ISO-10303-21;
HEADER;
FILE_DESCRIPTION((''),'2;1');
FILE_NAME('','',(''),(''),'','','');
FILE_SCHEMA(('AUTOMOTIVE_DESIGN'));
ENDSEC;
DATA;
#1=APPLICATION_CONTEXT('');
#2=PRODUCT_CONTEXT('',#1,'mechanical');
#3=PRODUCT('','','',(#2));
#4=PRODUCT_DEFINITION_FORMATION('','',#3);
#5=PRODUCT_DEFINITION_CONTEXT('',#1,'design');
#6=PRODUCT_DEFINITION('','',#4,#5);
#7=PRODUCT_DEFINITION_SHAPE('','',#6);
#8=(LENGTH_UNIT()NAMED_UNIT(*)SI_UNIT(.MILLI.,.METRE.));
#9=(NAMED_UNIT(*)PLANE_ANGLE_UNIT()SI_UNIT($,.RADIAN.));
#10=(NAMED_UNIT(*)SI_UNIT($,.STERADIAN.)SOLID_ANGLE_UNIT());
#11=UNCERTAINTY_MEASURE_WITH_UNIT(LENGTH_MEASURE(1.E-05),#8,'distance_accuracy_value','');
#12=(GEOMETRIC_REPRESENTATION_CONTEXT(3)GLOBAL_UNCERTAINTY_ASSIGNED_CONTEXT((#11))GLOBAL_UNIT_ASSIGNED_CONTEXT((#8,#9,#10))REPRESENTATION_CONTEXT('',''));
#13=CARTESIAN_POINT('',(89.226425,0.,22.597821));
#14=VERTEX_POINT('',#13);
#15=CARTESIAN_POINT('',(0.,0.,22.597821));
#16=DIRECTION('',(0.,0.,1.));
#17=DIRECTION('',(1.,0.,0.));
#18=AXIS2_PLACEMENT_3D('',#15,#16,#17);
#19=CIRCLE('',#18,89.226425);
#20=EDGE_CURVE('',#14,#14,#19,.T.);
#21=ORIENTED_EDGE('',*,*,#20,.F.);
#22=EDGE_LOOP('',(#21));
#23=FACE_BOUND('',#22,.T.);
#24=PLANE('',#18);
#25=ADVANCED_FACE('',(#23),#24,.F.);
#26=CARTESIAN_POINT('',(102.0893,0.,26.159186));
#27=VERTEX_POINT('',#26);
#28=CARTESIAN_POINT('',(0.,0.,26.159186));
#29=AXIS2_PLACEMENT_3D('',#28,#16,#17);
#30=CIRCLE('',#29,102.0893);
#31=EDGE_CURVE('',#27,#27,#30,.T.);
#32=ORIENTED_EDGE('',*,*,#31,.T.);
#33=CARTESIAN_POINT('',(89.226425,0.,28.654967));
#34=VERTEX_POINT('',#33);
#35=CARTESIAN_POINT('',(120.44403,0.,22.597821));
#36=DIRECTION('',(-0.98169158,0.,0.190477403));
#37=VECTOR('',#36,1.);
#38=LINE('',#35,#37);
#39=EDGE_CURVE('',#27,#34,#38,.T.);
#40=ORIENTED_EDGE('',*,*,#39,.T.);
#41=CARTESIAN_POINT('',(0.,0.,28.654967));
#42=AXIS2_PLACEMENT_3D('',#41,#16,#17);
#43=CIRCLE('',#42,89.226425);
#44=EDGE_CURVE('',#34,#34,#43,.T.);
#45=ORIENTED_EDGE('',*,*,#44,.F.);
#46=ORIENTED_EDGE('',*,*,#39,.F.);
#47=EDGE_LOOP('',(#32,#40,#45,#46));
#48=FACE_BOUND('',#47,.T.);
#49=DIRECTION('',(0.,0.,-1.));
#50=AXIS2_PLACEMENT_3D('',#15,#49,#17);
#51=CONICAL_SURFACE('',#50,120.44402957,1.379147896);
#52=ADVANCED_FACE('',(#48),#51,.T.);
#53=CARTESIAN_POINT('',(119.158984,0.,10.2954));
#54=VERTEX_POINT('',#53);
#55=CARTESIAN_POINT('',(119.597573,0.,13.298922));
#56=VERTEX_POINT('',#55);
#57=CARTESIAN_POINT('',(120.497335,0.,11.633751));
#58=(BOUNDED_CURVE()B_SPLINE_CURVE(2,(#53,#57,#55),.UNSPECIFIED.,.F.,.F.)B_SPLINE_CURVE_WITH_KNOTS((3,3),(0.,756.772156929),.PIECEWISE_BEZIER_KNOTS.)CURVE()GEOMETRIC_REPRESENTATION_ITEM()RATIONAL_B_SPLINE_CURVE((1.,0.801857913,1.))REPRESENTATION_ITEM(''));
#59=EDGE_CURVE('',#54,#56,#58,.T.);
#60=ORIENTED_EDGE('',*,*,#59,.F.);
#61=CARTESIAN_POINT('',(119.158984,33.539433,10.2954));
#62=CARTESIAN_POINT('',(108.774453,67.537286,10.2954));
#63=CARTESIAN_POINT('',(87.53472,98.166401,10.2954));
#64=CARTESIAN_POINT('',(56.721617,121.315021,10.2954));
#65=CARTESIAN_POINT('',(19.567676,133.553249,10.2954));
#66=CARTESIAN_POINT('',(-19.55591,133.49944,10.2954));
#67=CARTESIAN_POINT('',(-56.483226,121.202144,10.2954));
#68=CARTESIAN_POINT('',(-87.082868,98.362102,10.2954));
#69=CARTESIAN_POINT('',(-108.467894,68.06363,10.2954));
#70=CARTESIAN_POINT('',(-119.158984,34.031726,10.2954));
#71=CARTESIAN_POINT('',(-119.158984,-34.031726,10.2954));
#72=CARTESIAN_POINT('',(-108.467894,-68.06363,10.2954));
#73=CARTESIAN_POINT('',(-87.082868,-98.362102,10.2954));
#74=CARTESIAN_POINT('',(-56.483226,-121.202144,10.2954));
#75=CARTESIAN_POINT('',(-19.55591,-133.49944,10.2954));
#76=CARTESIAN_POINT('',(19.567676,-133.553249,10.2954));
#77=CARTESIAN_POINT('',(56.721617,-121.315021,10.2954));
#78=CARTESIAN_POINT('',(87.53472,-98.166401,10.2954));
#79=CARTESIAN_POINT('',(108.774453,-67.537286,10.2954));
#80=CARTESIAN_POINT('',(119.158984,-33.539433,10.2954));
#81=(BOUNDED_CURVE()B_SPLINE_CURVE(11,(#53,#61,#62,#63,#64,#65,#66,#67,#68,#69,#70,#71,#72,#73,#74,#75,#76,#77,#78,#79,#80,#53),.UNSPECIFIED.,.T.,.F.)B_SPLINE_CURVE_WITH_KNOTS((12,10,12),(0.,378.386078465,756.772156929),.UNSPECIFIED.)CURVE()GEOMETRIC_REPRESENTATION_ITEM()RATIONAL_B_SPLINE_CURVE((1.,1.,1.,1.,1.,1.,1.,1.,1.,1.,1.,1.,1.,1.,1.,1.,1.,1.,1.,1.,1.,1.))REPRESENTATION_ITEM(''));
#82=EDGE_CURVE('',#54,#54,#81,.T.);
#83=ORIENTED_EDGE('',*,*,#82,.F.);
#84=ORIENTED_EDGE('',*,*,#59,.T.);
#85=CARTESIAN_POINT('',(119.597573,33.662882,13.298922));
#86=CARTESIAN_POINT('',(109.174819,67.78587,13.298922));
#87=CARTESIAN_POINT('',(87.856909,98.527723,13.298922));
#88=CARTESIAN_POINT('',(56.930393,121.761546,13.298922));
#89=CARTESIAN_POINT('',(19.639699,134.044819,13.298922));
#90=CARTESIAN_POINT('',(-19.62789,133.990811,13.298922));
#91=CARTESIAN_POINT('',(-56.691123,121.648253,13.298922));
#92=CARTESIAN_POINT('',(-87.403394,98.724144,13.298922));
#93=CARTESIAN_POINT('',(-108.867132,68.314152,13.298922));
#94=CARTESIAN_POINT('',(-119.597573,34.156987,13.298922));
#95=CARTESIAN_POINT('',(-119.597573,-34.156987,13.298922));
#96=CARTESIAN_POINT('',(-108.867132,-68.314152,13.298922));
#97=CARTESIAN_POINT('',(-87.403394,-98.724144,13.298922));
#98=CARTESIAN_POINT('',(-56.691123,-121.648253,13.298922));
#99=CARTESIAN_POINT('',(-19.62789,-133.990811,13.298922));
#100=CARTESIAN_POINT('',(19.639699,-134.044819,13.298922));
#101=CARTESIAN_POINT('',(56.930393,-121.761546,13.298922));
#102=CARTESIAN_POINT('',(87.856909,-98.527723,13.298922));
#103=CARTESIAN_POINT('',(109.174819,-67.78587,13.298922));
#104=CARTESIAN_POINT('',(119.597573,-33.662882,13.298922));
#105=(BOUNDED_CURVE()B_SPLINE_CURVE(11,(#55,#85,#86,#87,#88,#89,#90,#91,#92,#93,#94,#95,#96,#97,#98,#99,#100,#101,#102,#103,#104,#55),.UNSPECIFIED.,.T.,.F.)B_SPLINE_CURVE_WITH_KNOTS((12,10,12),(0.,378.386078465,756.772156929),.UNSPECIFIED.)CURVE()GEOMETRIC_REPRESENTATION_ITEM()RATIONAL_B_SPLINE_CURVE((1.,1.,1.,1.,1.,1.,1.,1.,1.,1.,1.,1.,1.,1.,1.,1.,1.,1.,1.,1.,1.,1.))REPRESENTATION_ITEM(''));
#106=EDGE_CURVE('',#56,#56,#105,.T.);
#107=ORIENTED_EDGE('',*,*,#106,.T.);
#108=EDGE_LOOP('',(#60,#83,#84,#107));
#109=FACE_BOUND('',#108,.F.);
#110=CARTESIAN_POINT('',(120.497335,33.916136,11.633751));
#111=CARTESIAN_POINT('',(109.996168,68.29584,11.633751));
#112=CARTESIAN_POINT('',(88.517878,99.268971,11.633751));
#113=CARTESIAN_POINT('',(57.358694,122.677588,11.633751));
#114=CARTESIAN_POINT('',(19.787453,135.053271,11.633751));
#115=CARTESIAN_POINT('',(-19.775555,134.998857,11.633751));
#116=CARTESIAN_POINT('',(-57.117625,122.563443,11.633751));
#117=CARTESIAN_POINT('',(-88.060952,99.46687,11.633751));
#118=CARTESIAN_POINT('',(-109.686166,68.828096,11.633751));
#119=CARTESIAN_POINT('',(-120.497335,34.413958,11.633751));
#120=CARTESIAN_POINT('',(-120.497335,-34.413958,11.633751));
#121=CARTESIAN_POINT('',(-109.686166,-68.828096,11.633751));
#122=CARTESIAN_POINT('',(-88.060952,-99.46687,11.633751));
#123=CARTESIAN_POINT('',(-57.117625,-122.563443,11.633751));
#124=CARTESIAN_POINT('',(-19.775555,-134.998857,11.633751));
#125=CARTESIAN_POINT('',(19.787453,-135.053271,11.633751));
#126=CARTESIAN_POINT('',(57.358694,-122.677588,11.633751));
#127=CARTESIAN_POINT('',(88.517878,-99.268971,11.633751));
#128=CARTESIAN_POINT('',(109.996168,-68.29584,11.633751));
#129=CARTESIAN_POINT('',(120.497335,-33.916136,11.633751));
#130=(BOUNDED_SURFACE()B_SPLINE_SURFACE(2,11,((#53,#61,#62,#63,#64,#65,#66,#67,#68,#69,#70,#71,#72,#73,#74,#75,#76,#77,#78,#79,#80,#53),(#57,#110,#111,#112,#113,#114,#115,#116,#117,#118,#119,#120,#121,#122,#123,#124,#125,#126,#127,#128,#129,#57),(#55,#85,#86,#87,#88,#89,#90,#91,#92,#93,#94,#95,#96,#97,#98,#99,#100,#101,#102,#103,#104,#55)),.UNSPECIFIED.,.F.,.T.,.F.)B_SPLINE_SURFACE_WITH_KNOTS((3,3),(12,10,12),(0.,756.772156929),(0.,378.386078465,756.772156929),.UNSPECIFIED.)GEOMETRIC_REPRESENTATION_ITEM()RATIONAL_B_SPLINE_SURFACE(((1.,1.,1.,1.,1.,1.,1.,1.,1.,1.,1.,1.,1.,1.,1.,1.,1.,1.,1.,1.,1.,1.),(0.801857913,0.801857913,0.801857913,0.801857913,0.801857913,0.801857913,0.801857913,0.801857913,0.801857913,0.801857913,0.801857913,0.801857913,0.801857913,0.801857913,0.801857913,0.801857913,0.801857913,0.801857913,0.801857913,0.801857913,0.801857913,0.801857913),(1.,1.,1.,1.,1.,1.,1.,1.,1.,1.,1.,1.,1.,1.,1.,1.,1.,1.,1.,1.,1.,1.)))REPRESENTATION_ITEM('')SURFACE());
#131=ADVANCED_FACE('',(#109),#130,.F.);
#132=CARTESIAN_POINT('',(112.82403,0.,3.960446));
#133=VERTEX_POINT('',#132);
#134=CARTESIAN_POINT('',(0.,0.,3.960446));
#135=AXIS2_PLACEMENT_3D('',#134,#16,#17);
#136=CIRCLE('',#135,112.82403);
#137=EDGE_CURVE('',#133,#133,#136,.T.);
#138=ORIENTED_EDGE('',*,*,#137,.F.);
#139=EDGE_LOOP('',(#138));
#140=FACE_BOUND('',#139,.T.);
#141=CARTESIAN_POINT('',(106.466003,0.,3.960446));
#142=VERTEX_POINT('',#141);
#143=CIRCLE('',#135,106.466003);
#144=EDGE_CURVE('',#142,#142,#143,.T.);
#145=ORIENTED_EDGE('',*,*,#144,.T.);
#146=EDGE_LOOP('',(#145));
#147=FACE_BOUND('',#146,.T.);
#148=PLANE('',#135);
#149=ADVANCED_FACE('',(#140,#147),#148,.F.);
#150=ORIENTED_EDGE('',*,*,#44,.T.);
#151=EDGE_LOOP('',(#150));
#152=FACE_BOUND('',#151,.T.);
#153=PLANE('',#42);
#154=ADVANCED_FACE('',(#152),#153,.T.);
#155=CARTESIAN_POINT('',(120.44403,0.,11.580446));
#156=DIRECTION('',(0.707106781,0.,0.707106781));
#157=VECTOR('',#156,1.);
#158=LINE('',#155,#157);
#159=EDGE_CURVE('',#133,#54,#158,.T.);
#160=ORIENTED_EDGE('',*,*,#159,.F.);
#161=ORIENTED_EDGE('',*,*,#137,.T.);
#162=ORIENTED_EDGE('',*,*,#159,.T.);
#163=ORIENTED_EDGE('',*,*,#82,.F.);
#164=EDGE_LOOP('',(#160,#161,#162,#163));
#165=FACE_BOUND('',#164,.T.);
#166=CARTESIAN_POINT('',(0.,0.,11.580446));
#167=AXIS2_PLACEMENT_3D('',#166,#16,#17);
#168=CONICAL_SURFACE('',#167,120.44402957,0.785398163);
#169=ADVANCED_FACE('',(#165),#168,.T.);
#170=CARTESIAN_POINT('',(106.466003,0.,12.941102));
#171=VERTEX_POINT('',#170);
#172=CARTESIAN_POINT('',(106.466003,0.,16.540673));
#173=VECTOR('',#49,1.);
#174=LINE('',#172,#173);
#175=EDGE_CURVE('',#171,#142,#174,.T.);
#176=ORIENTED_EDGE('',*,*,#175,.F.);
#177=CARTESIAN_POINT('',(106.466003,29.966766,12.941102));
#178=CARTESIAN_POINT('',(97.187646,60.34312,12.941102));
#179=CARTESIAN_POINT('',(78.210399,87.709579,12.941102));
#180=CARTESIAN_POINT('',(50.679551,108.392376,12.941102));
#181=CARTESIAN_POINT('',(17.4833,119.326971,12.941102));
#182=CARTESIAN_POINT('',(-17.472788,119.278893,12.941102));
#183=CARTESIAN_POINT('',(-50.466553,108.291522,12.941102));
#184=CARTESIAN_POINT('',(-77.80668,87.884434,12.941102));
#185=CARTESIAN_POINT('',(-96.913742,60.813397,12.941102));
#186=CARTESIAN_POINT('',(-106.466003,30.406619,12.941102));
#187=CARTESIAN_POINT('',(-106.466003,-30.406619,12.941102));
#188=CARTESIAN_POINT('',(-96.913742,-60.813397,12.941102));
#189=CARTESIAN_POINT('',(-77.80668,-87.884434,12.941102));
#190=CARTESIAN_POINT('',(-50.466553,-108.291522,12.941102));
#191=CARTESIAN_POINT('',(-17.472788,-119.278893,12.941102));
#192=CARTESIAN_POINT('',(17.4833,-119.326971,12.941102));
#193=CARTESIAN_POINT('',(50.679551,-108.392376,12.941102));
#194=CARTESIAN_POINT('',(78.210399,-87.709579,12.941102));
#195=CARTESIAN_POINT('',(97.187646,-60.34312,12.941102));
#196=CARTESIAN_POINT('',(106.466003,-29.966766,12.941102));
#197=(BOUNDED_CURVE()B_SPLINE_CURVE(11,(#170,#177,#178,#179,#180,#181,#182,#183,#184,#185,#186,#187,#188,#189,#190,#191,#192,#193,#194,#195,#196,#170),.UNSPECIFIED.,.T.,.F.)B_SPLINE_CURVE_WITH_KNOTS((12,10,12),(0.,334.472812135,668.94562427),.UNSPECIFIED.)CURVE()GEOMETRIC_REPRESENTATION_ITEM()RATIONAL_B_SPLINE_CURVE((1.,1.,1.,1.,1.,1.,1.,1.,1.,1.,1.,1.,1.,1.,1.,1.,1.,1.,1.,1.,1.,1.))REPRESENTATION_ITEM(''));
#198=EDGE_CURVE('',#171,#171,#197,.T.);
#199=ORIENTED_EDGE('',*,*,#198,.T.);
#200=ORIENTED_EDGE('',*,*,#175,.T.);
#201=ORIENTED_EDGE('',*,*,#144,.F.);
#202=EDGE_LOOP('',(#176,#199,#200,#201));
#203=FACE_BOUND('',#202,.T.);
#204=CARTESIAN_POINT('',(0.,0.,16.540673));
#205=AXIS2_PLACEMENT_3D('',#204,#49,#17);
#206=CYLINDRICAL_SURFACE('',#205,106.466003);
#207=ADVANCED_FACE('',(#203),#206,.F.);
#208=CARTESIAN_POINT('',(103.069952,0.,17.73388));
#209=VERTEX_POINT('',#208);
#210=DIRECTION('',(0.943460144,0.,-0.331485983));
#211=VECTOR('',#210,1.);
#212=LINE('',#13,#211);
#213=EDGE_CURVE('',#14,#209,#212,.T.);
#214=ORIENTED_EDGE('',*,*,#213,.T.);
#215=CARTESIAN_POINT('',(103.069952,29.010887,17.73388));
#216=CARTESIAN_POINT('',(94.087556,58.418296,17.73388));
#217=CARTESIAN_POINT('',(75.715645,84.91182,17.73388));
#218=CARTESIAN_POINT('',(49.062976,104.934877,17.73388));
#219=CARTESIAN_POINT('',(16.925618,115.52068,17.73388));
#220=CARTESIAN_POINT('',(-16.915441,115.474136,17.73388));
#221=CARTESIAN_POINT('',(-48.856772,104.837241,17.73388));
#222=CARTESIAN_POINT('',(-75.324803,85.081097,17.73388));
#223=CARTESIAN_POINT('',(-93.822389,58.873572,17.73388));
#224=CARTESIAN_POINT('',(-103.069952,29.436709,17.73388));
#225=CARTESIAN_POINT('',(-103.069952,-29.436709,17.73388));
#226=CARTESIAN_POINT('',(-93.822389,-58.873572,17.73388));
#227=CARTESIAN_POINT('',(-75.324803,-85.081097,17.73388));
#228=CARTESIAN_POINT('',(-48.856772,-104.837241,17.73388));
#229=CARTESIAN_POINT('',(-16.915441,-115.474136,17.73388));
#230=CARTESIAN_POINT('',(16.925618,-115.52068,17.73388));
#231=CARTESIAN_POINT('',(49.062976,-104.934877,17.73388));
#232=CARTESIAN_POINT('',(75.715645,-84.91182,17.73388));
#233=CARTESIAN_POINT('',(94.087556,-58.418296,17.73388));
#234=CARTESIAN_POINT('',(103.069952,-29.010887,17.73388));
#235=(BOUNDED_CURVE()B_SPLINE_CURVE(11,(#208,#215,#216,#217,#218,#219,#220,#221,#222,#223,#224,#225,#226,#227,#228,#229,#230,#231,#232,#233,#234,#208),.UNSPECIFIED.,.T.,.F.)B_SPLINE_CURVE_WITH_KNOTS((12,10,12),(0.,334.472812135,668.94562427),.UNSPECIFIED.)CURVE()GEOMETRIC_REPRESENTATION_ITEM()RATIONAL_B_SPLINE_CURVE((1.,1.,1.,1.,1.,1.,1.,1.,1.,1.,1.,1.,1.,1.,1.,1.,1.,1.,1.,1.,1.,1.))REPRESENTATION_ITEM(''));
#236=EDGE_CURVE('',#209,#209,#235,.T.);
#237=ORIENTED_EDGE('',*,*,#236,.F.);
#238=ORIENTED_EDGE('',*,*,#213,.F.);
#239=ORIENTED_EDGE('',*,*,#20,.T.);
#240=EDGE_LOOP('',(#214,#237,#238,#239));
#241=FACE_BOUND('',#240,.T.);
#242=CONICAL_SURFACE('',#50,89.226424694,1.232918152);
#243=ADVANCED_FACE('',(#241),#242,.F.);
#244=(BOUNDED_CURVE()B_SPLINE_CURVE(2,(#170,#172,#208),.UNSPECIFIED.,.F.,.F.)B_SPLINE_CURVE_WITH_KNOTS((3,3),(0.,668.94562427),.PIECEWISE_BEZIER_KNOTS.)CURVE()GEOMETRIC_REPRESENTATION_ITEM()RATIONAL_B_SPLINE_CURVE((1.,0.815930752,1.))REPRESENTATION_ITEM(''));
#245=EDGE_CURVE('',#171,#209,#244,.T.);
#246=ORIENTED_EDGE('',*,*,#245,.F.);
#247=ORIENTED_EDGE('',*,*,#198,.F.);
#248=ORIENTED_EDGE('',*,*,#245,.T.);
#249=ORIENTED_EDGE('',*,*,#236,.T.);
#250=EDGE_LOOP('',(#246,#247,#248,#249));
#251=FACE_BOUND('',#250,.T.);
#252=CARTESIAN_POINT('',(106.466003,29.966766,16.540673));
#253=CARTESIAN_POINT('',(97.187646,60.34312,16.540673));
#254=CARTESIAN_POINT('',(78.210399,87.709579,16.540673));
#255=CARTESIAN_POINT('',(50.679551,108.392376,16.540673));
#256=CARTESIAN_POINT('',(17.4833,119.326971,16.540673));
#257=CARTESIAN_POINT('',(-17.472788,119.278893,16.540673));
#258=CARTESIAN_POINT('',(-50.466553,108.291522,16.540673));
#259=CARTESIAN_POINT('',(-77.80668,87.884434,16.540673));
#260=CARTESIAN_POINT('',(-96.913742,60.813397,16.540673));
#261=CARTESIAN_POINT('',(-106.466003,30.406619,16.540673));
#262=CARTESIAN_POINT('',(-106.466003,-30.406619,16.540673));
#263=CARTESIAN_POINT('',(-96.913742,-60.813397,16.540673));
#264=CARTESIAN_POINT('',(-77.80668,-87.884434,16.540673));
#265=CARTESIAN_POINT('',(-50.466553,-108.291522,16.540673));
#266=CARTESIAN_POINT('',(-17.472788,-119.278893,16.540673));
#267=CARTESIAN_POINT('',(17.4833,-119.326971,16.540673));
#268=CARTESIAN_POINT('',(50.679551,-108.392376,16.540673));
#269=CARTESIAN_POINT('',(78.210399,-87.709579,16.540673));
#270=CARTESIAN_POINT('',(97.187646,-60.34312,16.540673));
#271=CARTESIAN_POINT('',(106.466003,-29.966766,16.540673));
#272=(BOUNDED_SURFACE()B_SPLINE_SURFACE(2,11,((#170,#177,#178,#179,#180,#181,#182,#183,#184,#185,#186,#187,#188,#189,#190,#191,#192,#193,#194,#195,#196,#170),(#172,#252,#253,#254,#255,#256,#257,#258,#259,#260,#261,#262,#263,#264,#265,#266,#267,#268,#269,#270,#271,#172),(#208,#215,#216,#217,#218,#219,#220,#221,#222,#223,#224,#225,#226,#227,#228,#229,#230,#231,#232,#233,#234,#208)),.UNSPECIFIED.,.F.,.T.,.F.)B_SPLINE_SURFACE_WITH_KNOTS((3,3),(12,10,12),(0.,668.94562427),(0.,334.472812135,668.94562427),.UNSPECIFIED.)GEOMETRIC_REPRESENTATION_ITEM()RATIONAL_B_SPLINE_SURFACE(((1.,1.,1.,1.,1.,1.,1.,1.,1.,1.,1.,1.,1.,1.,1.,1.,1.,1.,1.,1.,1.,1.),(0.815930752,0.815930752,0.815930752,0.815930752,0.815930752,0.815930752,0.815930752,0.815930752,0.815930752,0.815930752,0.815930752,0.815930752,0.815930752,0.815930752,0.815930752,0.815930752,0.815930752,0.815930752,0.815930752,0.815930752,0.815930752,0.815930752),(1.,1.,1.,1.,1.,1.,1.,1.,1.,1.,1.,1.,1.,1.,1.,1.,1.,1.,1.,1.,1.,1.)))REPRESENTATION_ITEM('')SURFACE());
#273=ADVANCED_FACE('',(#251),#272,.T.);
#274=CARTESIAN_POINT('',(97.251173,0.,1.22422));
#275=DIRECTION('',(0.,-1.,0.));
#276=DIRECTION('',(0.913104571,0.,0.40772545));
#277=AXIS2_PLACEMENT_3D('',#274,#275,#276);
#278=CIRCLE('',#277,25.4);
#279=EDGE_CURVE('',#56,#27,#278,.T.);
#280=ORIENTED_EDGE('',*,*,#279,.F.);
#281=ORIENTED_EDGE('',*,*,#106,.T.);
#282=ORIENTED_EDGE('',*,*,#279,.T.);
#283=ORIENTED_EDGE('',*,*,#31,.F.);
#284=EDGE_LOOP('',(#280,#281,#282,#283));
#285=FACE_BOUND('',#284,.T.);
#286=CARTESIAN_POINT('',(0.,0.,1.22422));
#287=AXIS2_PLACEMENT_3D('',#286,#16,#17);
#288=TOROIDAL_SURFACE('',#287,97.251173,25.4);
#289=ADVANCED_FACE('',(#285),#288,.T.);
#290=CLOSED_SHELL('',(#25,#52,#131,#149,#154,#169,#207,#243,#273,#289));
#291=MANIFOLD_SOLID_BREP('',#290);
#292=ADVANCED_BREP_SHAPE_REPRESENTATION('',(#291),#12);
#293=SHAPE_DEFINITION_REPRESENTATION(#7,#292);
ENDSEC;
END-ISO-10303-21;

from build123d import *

# Parameters (mm, degrees)
F2_SIZE = 7.62
F4_R    = 2.54
F5_R    = 5.08


# Not quite as in the source:
# - a fillet or chamfer that OpenCascade refuses, or shapes differently, is made with other operations: its cross-section is extruded or revolved along the edge and cut away or added


with BuildPart() as f1:
    # F0 (on Front) → F1 (revolve)
    with BuildSketch(Plane.XZ):
        Polygon((89.2264246941, 28.6549665034), (0, 28.6549665034), (0, 22.5978214294), (89.2264246941, 22.5978214294), (106.4660027623, 16.5406726301), (106.4660027623, 3.9604459889), (120.4440295696, 3.9604459889), (120.4440295696, 22.5978214294), align=None)
    revolve(axis=Axis((0, 0, 25.6263939664), (0, 0, 1)))

    # F2
    f2_edges = [f1.edges().sort_by_distance(p)[0] for p in [
        (-120.44403, 0, 3.960446),
    ]]
    chamfer(f2_edges, length=F2_SIZE)

    # F3: fillet of radius 25.4 on 1 edges, made by hand

    # F3_s1 → F3_t2 (revolve, cut)
    with BuildSketch(Plane.XZ):
        with BuildLine():
            ThreePointArc((120.4440295696, 11.5804459889), (113.0489234012, 21.1136915786), (102.0892995141, 26.1591857039))
            Line((102.0892995141, 26.1591857039), (120.4440295696, 22.5978214294))
            Line((120.4440295696, 22.5978214294), (120.4440295696, 11.5804459889))
        make_face()
    revolve(axis=Axis((0, 0, 22.5978214294), (0, 0, 1)), mode=Mode.SUBTRACT)

    # F4
    f4_edges = [f1.edges().sort_by_distance(p)[0] for p in [
        (-120.44403, 0, 11.580446),
    ]]
    fillet(f4_edges, radius=F4_R)

    # F5
    f5_edges = [f1.edges().sort_by_distance(p)[0] for p in [
        (-106.466003, 0, 16.540673),
    ]]
    fillet(f5_edges, radius=F5_R)


solid = f1.part
